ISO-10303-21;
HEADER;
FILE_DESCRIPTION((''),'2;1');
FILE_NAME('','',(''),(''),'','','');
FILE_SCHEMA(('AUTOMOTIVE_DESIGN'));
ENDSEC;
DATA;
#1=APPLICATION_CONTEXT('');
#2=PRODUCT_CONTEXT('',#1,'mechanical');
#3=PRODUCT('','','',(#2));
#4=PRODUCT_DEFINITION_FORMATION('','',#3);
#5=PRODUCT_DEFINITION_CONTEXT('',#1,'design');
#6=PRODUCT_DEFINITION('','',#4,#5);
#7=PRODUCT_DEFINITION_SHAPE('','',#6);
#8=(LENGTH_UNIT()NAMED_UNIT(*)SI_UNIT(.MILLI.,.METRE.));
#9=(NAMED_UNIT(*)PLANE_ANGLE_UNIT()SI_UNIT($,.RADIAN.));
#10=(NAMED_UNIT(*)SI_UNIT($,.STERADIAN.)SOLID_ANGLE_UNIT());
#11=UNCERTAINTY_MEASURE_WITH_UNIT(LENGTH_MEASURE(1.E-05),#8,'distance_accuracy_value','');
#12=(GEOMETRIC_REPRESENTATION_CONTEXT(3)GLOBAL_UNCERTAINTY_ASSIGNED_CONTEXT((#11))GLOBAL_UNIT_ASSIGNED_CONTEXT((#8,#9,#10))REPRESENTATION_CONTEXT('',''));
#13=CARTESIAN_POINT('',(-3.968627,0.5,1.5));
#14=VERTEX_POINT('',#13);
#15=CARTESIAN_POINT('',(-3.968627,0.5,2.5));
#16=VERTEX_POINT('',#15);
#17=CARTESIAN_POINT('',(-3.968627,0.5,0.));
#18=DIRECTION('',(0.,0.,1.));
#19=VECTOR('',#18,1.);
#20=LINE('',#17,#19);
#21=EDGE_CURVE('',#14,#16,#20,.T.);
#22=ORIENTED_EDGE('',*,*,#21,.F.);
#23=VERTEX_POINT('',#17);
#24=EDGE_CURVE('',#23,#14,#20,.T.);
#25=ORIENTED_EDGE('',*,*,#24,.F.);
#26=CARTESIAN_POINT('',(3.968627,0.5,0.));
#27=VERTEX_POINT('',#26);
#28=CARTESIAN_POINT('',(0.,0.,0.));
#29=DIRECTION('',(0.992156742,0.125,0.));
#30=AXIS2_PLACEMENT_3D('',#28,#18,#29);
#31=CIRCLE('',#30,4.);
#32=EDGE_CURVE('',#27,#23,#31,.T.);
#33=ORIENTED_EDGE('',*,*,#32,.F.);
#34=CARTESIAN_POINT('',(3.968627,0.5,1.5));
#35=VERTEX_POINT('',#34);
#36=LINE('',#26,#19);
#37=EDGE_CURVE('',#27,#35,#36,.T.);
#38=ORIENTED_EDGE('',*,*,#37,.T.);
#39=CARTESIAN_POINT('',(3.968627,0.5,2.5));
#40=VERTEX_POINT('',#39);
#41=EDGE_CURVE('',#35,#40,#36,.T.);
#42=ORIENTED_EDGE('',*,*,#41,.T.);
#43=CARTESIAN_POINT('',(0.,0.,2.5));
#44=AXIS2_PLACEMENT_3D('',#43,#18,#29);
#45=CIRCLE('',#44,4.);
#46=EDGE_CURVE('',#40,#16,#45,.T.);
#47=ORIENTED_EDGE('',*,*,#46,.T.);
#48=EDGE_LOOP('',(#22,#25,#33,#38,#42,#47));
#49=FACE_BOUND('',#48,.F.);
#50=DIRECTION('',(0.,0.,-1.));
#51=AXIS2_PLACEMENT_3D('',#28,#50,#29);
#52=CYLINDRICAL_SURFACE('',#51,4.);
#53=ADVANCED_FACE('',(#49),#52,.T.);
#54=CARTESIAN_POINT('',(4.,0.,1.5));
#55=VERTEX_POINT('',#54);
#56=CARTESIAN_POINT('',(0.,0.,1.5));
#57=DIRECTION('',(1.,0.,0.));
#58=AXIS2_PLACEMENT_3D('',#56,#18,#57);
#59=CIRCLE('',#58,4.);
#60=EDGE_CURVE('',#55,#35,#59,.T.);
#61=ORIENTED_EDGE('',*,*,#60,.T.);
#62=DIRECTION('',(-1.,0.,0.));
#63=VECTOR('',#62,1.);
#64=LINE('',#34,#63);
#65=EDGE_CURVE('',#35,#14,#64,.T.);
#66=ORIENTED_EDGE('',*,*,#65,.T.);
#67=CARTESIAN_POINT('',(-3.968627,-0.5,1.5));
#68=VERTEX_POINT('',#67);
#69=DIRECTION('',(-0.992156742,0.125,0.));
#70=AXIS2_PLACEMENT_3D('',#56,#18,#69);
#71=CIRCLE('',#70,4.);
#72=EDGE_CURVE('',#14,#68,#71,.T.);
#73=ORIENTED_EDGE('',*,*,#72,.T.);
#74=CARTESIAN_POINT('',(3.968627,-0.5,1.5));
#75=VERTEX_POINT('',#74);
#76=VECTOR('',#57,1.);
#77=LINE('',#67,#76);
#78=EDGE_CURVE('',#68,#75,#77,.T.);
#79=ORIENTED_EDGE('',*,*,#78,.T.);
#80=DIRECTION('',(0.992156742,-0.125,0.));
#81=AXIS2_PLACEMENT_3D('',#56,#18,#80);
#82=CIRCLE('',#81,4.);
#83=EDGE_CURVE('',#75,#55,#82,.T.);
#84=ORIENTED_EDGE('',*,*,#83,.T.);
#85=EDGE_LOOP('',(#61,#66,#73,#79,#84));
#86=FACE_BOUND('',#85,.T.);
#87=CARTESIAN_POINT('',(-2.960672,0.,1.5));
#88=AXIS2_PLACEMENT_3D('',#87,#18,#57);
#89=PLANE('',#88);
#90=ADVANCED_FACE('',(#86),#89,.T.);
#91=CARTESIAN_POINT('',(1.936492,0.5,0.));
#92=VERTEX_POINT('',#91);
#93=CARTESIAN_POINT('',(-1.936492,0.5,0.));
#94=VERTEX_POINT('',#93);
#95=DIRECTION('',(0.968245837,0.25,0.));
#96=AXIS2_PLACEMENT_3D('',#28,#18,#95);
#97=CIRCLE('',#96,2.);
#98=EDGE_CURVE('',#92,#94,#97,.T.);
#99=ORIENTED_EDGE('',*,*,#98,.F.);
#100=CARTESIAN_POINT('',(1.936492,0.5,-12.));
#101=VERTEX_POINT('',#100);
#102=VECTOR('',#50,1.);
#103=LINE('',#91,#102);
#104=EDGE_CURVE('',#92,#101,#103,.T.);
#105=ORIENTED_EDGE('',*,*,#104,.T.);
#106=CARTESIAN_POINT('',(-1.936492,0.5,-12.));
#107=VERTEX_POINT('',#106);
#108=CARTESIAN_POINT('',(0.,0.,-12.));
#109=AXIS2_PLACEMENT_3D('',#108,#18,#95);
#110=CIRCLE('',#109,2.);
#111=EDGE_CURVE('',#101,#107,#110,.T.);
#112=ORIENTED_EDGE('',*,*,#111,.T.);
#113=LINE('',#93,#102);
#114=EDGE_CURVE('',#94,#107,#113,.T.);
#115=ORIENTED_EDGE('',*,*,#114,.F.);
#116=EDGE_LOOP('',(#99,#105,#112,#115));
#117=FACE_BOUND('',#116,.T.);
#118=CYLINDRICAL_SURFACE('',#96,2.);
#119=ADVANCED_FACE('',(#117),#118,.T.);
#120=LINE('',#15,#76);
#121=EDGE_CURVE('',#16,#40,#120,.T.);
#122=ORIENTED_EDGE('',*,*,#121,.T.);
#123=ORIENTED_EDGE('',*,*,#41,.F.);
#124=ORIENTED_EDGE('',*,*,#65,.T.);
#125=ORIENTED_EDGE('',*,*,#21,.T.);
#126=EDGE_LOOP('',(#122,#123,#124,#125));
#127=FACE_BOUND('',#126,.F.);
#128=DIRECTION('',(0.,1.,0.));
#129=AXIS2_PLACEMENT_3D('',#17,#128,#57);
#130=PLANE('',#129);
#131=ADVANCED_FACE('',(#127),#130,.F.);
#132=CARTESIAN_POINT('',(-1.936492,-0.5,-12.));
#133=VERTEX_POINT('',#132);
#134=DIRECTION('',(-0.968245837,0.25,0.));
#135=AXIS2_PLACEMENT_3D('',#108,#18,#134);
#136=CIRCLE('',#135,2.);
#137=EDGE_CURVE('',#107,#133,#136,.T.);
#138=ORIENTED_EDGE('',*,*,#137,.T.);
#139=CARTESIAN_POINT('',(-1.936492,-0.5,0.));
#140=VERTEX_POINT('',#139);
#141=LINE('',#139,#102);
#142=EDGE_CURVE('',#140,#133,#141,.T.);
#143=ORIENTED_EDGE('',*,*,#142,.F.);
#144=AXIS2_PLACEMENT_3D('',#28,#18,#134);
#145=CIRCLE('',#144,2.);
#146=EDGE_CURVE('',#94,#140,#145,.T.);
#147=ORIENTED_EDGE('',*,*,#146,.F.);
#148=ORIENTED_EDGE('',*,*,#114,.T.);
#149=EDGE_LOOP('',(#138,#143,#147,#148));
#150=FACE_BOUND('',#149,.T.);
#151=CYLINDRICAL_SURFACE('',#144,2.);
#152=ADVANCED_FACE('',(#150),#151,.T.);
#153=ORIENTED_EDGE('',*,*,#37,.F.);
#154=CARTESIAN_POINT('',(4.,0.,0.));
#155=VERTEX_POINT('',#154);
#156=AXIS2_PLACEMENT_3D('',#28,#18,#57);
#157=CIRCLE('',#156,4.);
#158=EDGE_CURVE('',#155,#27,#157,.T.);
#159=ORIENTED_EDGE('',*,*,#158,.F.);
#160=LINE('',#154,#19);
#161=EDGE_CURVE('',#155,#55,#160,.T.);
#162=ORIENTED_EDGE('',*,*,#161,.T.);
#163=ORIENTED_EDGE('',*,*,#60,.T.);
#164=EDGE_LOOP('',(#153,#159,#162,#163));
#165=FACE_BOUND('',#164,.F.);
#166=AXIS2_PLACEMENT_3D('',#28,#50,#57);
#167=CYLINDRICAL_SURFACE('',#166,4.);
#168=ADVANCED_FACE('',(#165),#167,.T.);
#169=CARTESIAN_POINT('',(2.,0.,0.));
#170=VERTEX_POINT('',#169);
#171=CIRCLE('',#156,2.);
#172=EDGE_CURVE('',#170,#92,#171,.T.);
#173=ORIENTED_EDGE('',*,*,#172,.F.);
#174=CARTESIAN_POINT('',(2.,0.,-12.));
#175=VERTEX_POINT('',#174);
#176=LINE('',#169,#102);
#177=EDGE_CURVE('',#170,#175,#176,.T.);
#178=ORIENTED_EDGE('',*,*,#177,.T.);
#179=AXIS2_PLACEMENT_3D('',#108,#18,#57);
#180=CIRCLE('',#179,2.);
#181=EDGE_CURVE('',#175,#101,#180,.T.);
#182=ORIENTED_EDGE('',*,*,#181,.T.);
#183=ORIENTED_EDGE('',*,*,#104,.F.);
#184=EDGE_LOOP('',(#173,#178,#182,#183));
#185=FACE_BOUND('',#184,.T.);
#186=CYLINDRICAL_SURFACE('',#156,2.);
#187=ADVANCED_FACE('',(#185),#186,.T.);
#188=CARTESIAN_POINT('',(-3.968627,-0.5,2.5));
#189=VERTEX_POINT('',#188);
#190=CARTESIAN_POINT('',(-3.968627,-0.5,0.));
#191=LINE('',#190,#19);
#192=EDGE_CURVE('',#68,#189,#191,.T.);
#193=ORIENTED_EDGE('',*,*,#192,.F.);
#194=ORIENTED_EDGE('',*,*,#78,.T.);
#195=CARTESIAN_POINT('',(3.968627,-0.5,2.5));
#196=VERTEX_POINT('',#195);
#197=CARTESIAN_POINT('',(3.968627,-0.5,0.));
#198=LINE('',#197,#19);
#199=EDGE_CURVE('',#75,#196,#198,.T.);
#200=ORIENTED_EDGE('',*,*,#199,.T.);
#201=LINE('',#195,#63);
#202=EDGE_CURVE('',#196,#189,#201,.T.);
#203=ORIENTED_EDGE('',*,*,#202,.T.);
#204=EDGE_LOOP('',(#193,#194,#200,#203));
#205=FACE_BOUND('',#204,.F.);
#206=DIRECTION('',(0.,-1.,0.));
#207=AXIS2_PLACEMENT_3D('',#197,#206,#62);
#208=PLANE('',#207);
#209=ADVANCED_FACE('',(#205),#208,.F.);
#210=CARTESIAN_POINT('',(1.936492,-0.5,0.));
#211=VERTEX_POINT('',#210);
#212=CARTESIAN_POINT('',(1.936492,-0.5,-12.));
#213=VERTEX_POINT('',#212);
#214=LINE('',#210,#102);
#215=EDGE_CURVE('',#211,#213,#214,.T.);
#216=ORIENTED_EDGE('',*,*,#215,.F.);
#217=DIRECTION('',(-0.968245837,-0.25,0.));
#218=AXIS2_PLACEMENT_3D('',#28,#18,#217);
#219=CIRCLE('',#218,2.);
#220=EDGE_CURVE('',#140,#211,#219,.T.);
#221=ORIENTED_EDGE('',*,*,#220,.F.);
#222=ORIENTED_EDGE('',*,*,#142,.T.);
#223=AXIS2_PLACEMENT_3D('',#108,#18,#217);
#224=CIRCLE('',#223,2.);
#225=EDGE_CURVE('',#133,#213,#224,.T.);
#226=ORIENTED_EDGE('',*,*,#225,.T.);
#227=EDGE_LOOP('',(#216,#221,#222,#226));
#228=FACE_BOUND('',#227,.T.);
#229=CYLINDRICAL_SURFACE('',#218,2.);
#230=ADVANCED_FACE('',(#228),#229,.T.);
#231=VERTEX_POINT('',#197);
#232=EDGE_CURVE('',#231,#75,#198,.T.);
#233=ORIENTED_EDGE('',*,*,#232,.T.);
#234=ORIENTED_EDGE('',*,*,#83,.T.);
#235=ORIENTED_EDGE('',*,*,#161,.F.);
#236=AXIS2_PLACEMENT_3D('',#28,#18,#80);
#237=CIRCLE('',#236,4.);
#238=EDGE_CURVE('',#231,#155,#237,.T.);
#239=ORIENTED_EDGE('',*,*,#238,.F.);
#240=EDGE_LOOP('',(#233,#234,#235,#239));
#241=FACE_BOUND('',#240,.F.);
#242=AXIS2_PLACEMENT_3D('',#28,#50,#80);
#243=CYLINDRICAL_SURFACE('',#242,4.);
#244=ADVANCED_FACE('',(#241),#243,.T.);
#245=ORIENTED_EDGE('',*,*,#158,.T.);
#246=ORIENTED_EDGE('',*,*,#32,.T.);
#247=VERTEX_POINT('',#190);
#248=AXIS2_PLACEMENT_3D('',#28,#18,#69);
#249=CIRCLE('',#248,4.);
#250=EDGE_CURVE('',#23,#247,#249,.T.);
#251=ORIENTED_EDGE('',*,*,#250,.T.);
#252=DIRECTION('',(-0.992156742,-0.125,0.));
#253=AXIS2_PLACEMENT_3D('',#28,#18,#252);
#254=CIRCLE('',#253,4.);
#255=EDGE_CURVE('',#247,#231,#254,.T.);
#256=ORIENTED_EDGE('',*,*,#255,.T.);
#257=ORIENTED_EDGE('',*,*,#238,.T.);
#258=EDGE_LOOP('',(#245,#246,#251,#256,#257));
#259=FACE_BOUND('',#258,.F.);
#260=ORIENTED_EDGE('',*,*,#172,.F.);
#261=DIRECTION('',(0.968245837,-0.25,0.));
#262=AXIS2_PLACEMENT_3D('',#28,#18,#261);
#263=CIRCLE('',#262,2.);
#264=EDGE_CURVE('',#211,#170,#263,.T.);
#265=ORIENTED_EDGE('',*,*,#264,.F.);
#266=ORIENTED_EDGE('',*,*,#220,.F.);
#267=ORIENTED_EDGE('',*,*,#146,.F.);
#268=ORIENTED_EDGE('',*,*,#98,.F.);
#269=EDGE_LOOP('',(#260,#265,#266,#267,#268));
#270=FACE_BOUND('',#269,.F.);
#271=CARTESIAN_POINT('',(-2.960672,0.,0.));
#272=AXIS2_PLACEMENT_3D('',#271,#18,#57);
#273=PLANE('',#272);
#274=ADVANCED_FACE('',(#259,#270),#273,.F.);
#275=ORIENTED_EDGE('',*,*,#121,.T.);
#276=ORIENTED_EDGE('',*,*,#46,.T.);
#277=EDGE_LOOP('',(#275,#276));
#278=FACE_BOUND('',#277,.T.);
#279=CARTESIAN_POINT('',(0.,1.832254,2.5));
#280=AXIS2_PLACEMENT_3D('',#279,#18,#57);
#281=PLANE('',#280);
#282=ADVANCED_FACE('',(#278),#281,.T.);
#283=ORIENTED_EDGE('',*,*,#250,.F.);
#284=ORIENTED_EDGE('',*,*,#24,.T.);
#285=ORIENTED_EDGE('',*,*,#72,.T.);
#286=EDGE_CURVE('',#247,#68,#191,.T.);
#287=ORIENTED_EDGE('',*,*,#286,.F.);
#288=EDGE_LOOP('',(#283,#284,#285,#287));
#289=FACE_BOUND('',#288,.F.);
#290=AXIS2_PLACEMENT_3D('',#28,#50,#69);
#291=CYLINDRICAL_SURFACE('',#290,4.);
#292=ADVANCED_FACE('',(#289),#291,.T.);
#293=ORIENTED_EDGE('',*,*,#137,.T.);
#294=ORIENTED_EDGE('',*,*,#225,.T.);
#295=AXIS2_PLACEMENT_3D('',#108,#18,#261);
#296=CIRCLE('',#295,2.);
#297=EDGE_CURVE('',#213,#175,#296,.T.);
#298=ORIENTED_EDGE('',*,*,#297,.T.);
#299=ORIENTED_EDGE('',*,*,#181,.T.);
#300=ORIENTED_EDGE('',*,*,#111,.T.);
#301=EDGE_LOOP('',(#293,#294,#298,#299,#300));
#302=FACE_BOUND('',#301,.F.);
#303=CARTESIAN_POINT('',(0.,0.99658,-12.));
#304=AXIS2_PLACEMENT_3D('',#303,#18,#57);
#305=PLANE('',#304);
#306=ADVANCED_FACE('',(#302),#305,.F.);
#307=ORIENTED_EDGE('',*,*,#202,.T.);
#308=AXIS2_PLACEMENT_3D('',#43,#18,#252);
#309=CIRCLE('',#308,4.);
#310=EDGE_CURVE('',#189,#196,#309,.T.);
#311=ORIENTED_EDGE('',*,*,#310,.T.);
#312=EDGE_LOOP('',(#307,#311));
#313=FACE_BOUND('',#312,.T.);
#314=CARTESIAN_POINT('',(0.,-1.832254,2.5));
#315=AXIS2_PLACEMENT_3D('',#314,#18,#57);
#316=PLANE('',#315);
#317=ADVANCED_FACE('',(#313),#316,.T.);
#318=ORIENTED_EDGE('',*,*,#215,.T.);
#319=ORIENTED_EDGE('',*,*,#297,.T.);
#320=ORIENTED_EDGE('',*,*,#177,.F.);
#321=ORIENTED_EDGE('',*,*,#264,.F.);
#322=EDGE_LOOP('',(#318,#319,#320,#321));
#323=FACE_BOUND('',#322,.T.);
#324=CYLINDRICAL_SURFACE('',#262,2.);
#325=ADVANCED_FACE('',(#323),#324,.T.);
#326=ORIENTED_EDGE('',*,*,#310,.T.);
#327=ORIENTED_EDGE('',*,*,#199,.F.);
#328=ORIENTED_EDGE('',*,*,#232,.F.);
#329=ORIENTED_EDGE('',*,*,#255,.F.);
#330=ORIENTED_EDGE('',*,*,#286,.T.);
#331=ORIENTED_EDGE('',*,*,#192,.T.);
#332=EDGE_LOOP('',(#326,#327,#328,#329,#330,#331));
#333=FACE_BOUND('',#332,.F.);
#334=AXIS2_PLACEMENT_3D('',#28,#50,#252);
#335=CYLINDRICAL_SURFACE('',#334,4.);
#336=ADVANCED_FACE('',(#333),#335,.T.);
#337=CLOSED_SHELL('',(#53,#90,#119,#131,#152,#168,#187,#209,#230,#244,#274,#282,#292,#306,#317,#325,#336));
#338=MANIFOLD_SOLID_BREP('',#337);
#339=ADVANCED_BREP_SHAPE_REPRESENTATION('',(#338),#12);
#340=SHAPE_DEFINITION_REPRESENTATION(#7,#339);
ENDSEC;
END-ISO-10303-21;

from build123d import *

# Parameters (mm, degrees)
F1_DEPTH = 12
F2_DEPTH = 2.5
F3_DEPTH = 1.5


# Not quite as in the source:
# - a feature names something its author has since deleted; it is built from what else it names


with BuildPart() as f1:
    # F0 (on Top) → F1 (new body)
    with BuildSketch(Plane.XY):
        with BuildLine():
            Line((-1.9364916731, 0.5), (1.9364916731, 0.5))
            ThreePointArc((1.9364916731, 0.5), (0, 2), (-1.9364916731, 0.5))
        make_face()
        with BuildLine():
            ThreePointArc((2, 0), (1.9840593925, 0.252008585), (1.9364916731, 0.5))
            Line((1.9364916731, 0.5), (-1.9364916731, 0.5))
            ThreePointArc((-1.9364916731, 0.5), (-2, 0), (-1.9364916731, -0.5))
            Line((-1.9364916731, -0.5), (1.9364916731, -0.5))
            ThreePointArc((1.9364916731, -0.5), (1.9840593925, -0.252008585), (2, 0))
        make_face()
        with BuildLine():
            ThreePointArc((-1.9364916731, -0.5), (0, -2), (1.9364916731, -0.5))
            Line((1.9364916731, -0.5), (-1.9364916731, -0.5))
        make_face()
    extrude(amount=-F1_DEPTH)

    # F0 (on Top) → F2 (join)
    with BuildSketch(Plane.XY):
        with BuildLine():
            ThreePointArc((-3.9686269666, -0.5), (0, -4), (3.9686269666, -0.5))
            Line((3.9686269666, -0.5), (1.9364916731, -0.5))
            ThreePointArc((1.9364916731, -0.5), (0, -2), (-1.9364916731, -0.5))
            Line((-1.9364916731, -0.5), (-3.9686269666, -0.5))
        make_face()
        with BuildLine():
            Line((1.9364916731, 0.5), (3.9686269666, 0.5))
            ThreePointArc((3.9686269666, 0.5), (0, 4), (-3.9686269666, 0.5))
            Line((-3.9686269666, 0.5), (-1.9364916731, 0.5))
            ThreePointArc((-1.9364916731, 0.5), (0, 2), (1.9364916731, 0.5))
        make_face()
        with BuildLine():
            Line((-1.9364916731, 0.5), (1.9364916731, 0.5))
            ThreePointArc((1.9364916731, 0.5), (0, 2), (-1.9364916731, 0.5))
        make_face()
        with BuildLine():
            ThreePointArc((-1.9364916731, -0.5), (0, -2), (1.9364916731, -0.5))
            Line((1.9364916731, -0.5), (-1.9364916731, -0.5))
        make_face()
    extrude(amount=F2_DEPTH)

    # F0 (on Top) → F3 (join)
    with BuildSketch(Plane.XY):
        with BuildLine():
            Line((-1.9364916731, 0.5), (-3.9686269666, 0.5))
            ThreePointArc((-3.9686269666, 0.5), (-4, 0), (-3.9686269666, -0.5))
            Line((-3.9686269666, -0.5), (-1.9364916731, -0.5))
            ThreePointArc((-1.9364916731, -0.5), (-2, 0), (-1.9364916731, 0.5))
        make_face()
        with BuildLine():
            ThreePointArc((2, 0), (1.9840593925, 0.252008585), (1.9364916731, 0.5))
            Line((1.9364916731, 0.5), (-1.9364916731, 0.5))
            ThreePointArc((-1.9364916731, 0.5), (-2, 0), (-1.9364916731, -0.5))
            Line((-1.9364916731, -0.5), (1.9364916731, -0.5))
            ThreePointArc((1.9364916731, -0.5), (1.9840593925, -0.252008585), (2, 0))
        make_face()
        with BuildLine():
            ThreePointArc((3.9686269666, -0.5), (3.9921490369, -0.2504916502), (4, 0))
            ThreePointArc((4, 0), (3.9921490369, 0.2504916502), (3.9686269666, 0.5))
            Line((3.9686269666, 0.5), (1.9364916731, 0.5))
            ThreePointArc((1.9364916731, 0.5), (1.9840593925, 0.252008585), (2, 0))
            ThreePointArc((2, 0), (1.9840593925, -0.252008585), (1.9364916731, -0.5))
            Line((1.9364916731, -0.5), (3.9686269666, -0.5))
        make_face()
    extrude(amount=F3_DEPTH)


solid = f1.part
